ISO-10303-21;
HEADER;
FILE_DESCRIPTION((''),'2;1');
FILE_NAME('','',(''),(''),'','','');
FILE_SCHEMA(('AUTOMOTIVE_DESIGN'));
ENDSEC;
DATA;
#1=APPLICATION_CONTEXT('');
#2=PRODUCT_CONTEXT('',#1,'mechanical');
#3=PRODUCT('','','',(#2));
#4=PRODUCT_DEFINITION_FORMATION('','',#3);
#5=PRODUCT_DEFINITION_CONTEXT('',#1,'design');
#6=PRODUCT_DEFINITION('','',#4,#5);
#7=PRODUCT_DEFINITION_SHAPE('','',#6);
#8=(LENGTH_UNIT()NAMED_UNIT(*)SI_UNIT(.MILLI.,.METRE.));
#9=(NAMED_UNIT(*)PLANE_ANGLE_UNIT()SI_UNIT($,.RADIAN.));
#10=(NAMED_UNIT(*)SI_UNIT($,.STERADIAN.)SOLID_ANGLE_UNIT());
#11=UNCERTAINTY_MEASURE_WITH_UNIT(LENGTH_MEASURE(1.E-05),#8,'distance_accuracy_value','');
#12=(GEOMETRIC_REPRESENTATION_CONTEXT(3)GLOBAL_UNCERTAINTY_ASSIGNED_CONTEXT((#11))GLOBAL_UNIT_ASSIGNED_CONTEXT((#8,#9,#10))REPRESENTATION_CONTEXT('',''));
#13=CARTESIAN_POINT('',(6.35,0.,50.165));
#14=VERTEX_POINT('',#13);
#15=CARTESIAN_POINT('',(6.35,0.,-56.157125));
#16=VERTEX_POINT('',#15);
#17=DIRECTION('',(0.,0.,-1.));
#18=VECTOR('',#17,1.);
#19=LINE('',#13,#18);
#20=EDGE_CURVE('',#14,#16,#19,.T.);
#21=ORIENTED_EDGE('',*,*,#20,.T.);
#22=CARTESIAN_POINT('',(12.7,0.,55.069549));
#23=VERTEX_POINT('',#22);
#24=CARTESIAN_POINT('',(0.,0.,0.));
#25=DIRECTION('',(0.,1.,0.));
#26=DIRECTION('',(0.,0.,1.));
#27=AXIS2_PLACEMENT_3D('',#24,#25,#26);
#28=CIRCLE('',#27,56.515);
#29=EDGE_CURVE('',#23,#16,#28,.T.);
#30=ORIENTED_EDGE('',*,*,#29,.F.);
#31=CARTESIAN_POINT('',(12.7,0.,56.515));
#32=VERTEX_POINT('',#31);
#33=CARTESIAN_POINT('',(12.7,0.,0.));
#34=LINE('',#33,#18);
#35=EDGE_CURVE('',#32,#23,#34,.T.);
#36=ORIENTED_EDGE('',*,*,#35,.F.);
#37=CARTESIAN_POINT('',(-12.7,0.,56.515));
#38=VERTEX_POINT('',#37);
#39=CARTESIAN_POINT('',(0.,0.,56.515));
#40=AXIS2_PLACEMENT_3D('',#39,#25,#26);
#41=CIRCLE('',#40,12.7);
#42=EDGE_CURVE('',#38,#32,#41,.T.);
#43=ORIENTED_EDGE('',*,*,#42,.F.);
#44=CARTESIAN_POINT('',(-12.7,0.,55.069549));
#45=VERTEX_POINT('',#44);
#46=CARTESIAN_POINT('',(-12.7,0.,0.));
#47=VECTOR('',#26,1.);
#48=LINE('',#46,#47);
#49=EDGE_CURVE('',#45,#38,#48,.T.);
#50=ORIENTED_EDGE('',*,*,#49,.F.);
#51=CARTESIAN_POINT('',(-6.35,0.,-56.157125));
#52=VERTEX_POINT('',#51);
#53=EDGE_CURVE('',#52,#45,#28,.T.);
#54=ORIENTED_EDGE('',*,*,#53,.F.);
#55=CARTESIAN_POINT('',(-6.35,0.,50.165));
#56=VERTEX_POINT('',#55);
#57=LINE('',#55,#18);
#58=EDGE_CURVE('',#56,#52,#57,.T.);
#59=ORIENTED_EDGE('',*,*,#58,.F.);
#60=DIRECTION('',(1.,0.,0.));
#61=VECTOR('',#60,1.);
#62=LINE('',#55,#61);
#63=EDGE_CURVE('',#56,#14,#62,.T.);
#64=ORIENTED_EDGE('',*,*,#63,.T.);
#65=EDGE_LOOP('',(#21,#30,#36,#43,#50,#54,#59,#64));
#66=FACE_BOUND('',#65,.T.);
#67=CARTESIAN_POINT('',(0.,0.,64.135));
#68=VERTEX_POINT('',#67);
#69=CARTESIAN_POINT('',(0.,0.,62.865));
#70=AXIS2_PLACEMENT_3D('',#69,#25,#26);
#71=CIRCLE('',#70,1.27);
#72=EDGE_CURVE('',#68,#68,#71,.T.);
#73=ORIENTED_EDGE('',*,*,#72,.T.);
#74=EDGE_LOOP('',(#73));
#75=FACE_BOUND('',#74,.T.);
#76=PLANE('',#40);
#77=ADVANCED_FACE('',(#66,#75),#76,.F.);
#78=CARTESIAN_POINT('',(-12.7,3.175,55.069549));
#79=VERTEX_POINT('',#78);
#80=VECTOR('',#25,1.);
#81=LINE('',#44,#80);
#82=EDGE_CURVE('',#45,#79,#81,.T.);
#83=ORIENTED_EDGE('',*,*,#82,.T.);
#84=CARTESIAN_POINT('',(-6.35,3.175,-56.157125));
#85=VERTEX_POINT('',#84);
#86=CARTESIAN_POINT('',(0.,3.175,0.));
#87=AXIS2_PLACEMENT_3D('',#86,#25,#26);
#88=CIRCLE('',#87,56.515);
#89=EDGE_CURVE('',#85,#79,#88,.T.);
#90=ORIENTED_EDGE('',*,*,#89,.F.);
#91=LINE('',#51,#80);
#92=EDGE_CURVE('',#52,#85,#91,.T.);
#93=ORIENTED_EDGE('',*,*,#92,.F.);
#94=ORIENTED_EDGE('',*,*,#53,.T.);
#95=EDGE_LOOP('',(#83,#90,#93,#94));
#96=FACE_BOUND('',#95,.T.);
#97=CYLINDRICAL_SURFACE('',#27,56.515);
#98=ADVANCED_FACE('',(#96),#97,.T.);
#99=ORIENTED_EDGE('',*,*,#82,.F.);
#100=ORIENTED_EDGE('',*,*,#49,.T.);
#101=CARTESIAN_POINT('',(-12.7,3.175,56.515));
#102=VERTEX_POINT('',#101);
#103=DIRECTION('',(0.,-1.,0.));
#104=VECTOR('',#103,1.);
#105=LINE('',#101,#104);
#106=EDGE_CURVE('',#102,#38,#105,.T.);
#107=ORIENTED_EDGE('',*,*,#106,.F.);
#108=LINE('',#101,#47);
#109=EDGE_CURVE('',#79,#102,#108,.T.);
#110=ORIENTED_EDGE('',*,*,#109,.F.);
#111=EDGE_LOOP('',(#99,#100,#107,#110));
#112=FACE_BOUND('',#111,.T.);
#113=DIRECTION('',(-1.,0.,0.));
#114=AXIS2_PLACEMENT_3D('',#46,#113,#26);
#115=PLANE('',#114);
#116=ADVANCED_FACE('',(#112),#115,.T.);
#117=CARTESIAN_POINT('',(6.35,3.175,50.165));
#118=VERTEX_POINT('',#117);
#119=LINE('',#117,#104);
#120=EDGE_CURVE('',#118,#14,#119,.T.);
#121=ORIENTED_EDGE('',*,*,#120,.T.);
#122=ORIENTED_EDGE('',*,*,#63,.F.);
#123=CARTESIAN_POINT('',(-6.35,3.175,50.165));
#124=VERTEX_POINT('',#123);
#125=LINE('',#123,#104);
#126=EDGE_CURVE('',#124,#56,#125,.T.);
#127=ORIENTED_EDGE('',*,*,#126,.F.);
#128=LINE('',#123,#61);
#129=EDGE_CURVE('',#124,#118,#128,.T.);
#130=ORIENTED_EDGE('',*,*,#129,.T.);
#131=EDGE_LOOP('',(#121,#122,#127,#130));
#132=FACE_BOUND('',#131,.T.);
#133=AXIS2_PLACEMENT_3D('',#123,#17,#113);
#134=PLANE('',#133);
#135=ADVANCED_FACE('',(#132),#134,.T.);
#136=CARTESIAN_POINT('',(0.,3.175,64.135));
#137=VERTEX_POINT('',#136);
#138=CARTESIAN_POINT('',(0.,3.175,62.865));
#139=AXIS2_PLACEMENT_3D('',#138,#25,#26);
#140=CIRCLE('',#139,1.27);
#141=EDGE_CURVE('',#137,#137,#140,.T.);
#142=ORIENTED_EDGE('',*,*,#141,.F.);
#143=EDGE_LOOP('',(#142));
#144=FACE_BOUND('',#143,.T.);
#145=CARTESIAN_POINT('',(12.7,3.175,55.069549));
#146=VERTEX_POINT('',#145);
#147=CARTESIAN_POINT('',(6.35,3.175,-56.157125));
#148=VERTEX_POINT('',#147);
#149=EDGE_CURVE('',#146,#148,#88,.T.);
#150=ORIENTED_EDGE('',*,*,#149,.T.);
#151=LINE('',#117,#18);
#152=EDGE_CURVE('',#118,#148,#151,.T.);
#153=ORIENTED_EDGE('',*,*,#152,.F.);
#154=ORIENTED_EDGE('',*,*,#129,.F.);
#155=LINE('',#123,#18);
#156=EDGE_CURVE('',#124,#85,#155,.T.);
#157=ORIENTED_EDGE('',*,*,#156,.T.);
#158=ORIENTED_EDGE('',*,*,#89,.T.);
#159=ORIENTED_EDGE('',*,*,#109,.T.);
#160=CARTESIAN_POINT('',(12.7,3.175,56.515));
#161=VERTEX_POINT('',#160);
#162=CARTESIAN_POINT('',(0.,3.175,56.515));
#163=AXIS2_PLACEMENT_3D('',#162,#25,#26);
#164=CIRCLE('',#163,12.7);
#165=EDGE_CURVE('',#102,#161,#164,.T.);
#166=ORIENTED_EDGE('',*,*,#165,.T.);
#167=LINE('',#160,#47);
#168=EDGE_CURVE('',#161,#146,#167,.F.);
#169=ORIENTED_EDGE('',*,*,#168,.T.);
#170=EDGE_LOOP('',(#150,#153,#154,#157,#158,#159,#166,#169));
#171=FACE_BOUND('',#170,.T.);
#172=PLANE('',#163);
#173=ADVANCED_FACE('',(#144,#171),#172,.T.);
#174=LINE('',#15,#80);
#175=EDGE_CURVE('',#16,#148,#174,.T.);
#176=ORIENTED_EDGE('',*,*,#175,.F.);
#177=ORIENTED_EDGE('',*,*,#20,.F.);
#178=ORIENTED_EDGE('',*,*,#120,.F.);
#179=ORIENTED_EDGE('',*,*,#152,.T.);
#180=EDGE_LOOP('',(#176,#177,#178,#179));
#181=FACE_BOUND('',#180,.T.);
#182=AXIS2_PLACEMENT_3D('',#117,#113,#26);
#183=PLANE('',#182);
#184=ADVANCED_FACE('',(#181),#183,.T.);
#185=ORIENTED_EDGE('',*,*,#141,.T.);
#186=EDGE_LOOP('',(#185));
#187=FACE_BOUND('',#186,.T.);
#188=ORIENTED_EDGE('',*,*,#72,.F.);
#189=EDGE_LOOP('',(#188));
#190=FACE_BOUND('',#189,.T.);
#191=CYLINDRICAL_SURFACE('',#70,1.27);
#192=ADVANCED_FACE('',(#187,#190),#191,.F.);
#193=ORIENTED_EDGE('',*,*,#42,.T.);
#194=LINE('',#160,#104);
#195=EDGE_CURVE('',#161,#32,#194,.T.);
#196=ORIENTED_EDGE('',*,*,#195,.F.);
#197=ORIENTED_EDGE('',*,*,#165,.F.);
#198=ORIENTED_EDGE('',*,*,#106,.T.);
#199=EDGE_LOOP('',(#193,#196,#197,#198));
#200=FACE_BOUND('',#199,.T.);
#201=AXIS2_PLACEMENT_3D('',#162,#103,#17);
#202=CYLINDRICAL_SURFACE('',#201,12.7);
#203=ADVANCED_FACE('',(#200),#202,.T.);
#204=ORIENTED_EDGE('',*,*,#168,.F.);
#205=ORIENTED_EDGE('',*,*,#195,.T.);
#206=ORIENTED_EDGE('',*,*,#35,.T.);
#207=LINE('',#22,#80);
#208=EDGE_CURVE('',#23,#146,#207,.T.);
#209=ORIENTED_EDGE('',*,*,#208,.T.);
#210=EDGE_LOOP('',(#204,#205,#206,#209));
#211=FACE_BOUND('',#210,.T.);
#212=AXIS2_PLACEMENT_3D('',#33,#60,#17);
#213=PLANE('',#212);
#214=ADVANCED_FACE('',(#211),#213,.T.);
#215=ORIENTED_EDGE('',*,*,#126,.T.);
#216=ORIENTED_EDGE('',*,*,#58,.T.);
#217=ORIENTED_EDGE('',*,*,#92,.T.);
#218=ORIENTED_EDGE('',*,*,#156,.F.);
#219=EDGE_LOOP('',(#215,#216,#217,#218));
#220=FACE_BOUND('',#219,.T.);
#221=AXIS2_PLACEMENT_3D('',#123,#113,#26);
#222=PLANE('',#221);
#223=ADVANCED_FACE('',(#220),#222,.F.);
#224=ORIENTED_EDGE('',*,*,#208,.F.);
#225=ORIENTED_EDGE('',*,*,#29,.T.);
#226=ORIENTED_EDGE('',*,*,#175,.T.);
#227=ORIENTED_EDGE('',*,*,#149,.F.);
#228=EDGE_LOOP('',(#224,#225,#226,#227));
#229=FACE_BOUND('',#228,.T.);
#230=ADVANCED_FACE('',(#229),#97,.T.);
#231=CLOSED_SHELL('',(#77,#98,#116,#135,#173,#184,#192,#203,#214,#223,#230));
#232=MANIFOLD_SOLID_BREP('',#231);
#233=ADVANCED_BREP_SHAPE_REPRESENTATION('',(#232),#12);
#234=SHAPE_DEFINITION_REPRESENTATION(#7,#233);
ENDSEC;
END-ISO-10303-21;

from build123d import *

# Parameters (mm, degrees)
BOSS_EXTRUDE1_DEPTH = 3.175
SKETCH3_R           = 1.27
CUT_EXTRUDE1_DEPTH  = 90.413321575
CUT_EXTRUDE2_START  = -3.175
CUT_EXTRUDE2_DEPTH  = 3.175


# Read off the part's stored shape, not the designer's step: Cut-Extrude2
with BuildPart() as part:
    # Sketch2 → Boss-Extrude1 (new body)
    with BuildSketch(Plane(origin=(0, 0, 0), x_dir=(1, 0, 0), z_dir=(0, 1, 0))):
        with BuildLine():
            Line((6.35, 56.515), (56.515, 56.515))
            Line((56.515, 56.515), (56.515, -56.515))
            Line((56.515, -56.515), (12.7, -56.515))
            ThreePointArc((12.7, -56.515), (0, -69.215), (-12.7, -56.515))
            Line((-12.7, -56.515), (-56.515, -56.515))
            Line((-56.515, -56.515), (-56.515, 56.515))
            Line((-56.515, 56.515), (-6.35, 56.515))
            Line((-6.35, 56.515), (-6.35, -50.165))
            Line((-6.35, -50.165), (6.35, -50.165))
            Line((6.35, -50.165), (6.35, 56.515))
        make_face()
    extrude(amount=BOSS_EXTRUDE1_DEPTH)

    # Sketch3 → Cut-Extrude1 (cut, through all)
    with BuildSketch(Plane(origin=(0, 3.175, 0), x_dir=(1, 0, 0), z_dir=(0, 1, 0))):
        with Locations(Location((0, -62.865, 0), (0, 0, 270))):
            Circle(SKETCH3_R)
    extrude(amount=-CUT_EXTRUDE1_DEPTH, mode=Mode.SUBTRACT)

    # Cut-Extrude2 outline → Cut-Extrude2 (cut)
    with BuildSketch(Plane(origin=(0, 3.175, 0), x_dir=(1, 0, 0), z_dir=(0, 1, 0)).offset(CUT_EXTRUDE2_START)):
        with BuildLine():
            ThreePointArc((6.35, 56.157125327), (42.147452325, 37.650199037), (56.515, 0))
            Line((56.515, 0), (56.515, 56.515))
            Line((56.515, 56.515), (6.35, 56.515))
            Line((6.35, 56.515), (6.35, 56.157125327))
        make_face()
        with BuildLine():
            ThreePointArc((56.515, 0), (44.224912238, -35.186678765), (12.7, -55.069548981))
            Line((12.7, -55.069548981), (12.7, -56.515))
            Line((12.7, -56.515), (56.515, -56.515))
            Line((56.515, -56.515), (56.515, 0))
        make_face()
        with BuildLine():
            ThreePointArc((-12.7, -55.069548981), (-44.224912408, -35.186678552), (-56.515, 5.45e-07))
            Line((-56.515, 5.45e-07), (-56.515, -56.515))
            Line((-56.515, -56.515), (-12.7, -56.515))
            Line((-12.7, -56.515), (-12.7, -55.069548981))
        make_face()
        with BuildLine():
            ThreePointArc((-56.515, 5.45e-07), (-42.147452144, 37.65019924), (-6.35, 56.157125327))
            Line((-6.35, 56.157125327), (-6.35, 56.515))
            Line((-6.35, 56.515), (-56.515, 56.515))
            Line((-56.515, 56.515), (-56.515, 5.45e-07))
        make_face()
    extrude(amount=CUT_EXTRUDE2_DEPTH, mode=Mode.SUBTRACT)


solid = part.part
